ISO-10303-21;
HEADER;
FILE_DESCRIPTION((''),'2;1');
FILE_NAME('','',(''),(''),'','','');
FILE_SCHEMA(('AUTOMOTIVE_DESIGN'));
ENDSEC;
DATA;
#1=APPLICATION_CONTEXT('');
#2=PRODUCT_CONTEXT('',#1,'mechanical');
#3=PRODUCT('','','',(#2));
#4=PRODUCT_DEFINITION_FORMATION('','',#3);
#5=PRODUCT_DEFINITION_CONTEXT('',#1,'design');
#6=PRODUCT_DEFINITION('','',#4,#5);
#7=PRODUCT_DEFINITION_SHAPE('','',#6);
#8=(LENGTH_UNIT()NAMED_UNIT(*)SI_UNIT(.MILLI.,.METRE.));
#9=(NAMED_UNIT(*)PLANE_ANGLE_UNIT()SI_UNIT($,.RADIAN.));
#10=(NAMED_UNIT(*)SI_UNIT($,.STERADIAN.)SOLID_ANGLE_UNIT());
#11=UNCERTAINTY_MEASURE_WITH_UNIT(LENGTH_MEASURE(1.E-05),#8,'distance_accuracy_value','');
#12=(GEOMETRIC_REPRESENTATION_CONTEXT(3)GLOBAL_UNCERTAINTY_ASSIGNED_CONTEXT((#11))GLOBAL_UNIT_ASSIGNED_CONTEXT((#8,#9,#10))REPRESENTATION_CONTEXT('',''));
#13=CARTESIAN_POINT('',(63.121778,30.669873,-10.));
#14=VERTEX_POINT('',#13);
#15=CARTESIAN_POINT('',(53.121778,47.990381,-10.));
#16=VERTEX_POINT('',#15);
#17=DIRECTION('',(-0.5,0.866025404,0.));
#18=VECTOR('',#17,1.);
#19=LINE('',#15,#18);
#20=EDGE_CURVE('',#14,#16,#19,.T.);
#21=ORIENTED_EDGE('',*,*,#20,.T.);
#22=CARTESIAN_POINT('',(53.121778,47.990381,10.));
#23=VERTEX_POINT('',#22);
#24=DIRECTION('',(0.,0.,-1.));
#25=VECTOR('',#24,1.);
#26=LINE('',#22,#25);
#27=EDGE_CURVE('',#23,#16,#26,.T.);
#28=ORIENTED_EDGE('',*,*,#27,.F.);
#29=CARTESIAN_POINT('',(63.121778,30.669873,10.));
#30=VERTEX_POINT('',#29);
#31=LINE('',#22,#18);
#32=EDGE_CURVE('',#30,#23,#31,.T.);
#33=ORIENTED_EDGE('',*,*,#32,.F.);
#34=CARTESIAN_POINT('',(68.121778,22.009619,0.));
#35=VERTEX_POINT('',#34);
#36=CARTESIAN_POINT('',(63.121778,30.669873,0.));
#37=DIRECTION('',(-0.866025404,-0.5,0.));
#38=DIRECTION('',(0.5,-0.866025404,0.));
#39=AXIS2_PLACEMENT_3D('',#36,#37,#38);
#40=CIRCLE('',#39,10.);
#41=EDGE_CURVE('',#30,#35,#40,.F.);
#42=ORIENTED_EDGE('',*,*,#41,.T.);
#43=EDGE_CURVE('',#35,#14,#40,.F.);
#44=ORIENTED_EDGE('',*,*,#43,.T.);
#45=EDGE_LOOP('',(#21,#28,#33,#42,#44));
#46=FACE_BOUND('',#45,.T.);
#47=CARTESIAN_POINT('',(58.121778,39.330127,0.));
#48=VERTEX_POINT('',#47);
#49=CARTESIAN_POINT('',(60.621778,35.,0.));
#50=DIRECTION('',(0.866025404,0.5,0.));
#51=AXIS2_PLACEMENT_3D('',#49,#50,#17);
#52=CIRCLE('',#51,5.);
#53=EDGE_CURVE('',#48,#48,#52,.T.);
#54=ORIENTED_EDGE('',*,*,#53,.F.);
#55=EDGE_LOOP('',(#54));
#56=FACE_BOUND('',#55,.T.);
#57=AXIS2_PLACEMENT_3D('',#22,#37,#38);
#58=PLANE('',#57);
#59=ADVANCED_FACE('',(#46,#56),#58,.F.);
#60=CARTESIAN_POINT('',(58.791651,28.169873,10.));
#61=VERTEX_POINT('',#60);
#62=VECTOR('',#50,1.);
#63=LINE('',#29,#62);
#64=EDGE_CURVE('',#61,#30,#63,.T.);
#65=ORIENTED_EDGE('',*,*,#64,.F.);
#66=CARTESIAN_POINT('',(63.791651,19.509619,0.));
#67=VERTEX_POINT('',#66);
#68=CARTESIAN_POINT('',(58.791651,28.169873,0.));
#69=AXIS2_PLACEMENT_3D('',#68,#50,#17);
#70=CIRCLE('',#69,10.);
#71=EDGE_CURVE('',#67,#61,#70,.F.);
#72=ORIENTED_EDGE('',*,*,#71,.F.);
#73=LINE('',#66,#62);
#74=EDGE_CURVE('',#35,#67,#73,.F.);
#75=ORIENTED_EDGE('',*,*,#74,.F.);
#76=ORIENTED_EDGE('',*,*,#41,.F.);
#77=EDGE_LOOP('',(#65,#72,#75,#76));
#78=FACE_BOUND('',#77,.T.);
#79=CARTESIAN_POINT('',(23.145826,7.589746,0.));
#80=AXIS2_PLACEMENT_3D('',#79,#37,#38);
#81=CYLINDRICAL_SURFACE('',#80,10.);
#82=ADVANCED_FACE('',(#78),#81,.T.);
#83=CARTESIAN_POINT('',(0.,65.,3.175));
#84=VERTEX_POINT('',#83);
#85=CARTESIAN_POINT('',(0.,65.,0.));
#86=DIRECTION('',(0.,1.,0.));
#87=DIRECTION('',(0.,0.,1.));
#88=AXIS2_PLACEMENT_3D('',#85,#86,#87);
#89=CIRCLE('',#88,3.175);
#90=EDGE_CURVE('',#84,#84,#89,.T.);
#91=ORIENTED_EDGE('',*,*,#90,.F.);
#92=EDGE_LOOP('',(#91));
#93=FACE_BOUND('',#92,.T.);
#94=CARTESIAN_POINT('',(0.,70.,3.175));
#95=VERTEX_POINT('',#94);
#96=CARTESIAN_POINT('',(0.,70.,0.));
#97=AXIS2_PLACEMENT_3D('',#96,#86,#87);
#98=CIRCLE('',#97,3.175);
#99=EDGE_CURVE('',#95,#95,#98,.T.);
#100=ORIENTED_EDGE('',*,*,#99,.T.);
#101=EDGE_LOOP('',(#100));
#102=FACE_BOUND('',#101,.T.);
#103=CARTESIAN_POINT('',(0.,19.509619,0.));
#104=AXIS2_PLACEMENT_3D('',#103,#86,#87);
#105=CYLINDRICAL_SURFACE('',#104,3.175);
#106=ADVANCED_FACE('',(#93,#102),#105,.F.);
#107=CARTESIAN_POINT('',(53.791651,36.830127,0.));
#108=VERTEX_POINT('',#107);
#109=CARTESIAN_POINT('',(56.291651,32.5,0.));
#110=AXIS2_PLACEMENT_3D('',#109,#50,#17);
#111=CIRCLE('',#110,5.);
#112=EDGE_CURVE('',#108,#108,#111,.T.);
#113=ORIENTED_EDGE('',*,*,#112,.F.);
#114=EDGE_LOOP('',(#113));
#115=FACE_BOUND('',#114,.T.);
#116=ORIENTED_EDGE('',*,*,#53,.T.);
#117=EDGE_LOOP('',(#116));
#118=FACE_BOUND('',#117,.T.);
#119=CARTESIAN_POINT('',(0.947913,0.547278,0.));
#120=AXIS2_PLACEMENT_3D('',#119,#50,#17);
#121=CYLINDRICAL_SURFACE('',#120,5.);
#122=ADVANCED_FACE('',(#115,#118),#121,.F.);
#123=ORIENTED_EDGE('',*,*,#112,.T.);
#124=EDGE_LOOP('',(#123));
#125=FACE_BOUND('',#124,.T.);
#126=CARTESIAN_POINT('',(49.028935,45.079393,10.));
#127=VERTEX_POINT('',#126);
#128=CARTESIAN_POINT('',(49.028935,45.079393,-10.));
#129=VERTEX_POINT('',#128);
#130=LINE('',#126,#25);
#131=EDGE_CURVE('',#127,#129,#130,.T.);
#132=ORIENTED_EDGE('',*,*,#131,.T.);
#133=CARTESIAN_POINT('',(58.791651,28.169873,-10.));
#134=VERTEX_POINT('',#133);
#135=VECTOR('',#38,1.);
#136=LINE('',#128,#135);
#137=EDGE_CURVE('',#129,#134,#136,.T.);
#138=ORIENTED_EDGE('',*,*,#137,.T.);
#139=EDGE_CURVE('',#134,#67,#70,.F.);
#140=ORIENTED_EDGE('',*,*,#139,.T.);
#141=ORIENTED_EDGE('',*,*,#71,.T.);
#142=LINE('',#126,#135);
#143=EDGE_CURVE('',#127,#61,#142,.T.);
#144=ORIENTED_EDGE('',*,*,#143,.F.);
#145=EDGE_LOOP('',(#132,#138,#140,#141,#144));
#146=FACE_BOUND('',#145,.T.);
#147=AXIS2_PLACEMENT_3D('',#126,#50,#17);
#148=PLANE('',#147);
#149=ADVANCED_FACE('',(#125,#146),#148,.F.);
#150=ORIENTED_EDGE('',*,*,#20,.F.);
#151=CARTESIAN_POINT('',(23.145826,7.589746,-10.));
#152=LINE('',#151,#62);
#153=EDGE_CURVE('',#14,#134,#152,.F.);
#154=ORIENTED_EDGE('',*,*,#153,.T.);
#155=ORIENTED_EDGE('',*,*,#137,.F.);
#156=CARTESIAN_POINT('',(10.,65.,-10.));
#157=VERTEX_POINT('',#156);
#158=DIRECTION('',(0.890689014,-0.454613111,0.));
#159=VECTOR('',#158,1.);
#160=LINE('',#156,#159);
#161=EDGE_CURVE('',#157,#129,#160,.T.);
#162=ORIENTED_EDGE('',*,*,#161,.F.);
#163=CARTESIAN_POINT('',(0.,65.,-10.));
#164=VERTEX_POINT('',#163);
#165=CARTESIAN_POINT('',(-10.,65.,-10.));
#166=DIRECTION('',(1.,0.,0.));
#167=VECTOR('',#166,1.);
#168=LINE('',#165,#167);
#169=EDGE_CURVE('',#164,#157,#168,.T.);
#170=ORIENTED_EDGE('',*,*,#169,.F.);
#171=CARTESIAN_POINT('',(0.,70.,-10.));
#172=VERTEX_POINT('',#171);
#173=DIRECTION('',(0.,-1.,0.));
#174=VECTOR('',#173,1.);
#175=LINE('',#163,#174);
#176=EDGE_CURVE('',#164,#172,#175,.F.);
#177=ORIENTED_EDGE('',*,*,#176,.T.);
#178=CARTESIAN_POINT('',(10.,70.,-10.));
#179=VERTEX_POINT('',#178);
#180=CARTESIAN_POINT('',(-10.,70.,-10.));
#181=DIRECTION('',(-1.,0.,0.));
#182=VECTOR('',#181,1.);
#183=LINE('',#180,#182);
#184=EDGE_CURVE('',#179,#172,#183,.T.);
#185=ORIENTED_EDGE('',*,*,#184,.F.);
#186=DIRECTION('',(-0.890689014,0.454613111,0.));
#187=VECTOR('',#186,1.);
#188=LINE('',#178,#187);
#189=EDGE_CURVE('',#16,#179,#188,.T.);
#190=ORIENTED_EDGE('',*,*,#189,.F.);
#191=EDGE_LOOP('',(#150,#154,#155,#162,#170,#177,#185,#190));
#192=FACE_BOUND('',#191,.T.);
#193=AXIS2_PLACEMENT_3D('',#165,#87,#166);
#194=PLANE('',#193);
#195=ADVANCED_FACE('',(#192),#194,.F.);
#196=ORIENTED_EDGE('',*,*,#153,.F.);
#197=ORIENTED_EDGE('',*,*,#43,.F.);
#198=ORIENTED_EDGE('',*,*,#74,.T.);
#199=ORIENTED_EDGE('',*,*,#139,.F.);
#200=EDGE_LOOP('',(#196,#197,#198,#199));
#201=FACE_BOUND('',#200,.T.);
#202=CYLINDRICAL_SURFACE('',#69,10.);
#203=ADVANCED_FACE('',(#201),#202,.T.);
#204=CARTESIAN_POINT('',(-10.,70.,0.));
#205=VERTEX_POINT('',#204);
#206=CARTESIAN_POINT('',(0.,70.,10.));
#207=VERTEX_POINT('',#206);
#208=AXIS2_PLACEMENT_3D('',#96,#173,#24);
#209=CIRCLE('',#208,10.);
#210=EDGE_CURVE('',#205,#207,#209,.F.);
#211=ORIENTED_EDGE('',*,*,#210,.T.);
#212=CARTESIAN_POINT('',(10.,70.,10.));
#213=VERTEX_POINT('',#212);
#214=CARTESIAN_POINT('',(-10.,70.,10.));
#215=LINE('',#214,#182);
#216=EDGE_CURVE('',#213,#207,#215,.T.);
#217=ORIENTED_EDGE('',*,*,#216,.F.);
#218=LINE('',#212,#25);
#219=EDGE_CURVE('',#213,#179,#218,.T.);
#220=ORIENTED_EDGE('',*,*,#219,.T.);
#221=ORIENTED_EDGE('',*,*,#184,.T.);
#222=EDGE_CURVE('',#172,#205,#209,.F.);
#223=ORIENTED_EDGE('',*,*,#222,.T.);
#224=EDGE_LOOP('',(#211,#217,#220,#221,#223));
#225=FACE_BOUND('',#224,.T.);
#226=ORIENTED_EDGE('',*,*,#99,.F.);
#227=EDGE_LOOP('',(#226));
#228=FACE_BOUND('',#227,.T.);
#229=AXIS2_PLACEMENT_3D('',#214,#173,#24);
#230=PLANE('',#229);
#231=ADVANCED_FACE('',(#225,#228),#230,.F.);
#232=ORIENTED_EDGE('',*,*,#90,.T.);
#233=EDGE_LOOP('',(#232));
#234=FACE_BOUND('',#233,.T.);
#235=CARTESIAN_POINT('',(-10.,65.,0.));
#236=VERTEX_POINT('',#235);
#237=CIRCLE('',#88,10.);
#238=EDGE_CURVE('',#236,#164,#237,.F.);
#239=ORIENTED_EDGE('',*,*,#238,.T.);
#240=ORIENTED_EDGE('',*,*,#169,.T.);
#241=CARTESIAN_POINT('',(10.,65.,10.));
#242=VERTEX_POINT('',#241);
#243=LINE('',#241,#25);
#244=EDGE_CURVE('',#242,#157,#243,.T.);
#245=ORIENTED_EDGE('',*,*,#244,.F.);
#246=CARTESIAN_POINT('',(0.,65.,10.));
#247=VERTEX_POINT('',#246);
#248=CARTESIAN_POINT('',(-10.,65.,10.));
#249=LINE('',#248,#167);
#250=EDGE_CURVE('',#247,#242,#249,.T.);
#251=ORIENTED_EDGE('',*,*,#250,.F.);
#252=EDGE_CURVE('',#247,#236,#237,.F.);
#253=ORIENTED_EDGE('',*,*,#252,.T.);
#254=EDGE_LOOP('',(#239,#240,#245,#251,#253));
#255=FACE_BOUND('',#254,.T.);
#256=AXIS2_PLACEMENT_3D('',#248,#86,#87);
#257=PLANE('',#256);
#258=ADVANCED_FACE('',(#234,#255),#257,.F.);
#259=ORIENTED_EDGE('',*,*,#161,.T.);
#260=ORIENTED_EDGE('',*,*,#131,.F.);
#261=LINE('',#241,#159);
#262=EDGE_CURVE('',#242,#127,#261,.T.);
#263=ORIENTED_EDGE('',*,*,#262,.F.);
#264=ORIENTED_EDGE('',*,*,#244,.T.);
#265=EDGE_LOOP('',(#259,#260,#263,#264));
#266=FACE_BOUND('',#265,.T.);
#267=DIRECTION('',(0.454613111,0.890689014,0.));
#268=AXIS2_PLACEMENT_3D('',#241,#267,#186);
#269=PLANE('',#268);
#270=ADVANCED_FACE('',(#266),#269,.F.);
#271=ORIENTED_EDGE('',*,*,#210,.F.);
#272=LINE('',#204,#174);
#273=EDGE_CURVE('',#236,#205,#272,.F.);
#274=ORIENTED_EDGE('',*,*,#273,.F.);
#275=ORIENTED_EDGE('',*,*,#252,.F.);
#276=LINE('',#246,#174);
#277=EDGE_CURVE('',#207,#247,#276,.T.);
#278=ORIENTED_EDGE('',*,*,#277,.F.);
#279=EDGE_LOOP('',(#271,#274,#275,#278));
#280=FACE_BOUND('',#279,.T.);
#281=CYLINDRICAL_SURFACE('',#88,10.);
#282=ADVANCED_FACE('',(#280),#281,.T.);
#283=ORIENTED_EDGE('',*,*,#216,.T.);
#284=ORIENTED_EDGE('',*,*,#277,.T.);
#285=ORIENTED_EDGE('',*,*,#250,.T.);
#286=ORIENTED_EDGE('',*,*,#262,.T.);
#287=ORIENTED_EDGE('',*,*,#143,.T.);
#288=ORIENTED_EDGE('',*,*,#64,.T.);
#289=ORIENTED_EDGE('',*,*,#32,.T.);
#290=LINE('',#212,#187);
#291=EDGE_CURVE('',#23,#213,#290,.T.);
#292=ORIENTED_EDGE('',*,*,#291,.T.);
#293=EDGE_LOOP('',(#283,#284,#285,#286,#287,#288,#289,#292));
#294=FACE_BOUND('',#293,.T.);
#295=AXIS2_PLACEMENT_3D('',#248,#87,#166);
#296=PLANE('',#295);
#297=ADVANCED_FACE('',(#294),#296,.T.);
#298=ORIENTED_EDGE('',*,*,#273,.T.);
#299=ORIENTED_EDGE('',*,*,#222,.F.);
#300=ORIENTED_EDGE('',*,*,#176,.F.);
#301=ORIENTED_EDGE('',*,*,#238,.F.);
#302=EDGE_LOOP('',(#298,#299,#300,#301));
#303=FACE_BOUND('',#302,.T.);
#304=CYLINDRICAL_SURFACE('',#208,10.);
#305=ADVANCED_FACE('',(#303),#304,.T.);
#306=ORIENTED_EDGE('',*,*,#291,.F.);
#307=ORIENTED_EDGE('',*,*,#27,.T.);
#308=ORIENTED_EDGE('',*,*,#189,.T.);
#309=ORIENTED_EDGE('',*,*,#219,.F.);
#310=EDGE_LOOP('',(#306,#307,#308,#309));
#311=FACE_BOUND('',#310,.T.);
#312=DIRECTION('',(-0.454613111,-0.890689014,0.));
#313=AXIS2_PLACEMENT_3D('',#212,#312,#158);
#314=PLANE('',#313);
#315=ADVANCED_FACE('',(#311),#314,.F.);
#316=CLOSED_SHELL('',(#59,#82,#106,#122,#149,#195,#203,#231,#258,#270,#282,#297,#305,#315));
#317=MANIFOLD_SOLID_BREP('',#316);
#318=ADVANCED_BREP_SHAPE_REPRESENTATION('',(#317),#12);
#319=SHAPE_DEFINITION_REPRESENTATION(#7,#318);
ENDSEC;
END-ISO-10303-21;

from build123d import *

# Parameters (mm, degrees)
BOSS_EXTRUDE1_DEPTH = 10
SKETCH2_R           = 3.175
CUT_EXTRUDE1_DEPTH  = 86.380649173
SKETCH3_R           = 5
CUT_EXTRUDE2_DEPTH  = 80.450837411
FILLET1_R           = 10


with BuildPart() as part:
    # Sketch1 → Boss-Extrude1 (new, symmetric)
    with BuildSketch(Plane.XY):
        Polygon((-10, 70), (10, 70), (53.121778265, 47.990381057), (68.121778265, 22.009618943), (63.791651246, 19.509618943), (49.028935235, 45.079393131), (10, 65), (-10, 65), align=None)
    extrude(amount=BOSS_EXTRUDE1_DEPTH, both=True)

    # Sketch2 → Cut-Extrude1 (cut, through all)
    with BuildSketch(Plane(origin=(0, 70, 0), x_dir=(1, 0, 0), z_dir=(0, 1, 0))):
        with Locations(Location((0, 0, 0), (0, 0, 270))):
            Circle(SKETCH2_R)
    extrude(amount=-CUT_EXTRUDE1_DEPTH, mode=Mode.SUBTRACT)

    # Sketch3 → Cut-Extrude2 (cut, through all)
    with BuildSketch(Plane(origin=(60.621778265, 35, 0), x_dir=(0, 0, -1), z_dir=(0.8660254037844397, 0.499999999999998, 0))):
        with Locations(Location((0, 0, 0), (0, 0, 90))):
            Circle(SKETCH3_R)
    extrude(amount=-CUT_EXTRUDE2_DEPTH, mode=Mode.SUBTRACT)

    # Fillet1
    fillet1_edges = [part.edges().sort_by_distance(p)[0] for p in [
        (65.956714755, 20.759618943, -10),
        (65.956714755, 20.759618943, 10),
        (-10, 67.5, -10),
        (-10, 67.5, 10),
    ]]
    fillet(fillet1_edges, radius=FILLET1_R - 0.0001)  # a hair under: the kernel refuses the full size


solid = part.part
